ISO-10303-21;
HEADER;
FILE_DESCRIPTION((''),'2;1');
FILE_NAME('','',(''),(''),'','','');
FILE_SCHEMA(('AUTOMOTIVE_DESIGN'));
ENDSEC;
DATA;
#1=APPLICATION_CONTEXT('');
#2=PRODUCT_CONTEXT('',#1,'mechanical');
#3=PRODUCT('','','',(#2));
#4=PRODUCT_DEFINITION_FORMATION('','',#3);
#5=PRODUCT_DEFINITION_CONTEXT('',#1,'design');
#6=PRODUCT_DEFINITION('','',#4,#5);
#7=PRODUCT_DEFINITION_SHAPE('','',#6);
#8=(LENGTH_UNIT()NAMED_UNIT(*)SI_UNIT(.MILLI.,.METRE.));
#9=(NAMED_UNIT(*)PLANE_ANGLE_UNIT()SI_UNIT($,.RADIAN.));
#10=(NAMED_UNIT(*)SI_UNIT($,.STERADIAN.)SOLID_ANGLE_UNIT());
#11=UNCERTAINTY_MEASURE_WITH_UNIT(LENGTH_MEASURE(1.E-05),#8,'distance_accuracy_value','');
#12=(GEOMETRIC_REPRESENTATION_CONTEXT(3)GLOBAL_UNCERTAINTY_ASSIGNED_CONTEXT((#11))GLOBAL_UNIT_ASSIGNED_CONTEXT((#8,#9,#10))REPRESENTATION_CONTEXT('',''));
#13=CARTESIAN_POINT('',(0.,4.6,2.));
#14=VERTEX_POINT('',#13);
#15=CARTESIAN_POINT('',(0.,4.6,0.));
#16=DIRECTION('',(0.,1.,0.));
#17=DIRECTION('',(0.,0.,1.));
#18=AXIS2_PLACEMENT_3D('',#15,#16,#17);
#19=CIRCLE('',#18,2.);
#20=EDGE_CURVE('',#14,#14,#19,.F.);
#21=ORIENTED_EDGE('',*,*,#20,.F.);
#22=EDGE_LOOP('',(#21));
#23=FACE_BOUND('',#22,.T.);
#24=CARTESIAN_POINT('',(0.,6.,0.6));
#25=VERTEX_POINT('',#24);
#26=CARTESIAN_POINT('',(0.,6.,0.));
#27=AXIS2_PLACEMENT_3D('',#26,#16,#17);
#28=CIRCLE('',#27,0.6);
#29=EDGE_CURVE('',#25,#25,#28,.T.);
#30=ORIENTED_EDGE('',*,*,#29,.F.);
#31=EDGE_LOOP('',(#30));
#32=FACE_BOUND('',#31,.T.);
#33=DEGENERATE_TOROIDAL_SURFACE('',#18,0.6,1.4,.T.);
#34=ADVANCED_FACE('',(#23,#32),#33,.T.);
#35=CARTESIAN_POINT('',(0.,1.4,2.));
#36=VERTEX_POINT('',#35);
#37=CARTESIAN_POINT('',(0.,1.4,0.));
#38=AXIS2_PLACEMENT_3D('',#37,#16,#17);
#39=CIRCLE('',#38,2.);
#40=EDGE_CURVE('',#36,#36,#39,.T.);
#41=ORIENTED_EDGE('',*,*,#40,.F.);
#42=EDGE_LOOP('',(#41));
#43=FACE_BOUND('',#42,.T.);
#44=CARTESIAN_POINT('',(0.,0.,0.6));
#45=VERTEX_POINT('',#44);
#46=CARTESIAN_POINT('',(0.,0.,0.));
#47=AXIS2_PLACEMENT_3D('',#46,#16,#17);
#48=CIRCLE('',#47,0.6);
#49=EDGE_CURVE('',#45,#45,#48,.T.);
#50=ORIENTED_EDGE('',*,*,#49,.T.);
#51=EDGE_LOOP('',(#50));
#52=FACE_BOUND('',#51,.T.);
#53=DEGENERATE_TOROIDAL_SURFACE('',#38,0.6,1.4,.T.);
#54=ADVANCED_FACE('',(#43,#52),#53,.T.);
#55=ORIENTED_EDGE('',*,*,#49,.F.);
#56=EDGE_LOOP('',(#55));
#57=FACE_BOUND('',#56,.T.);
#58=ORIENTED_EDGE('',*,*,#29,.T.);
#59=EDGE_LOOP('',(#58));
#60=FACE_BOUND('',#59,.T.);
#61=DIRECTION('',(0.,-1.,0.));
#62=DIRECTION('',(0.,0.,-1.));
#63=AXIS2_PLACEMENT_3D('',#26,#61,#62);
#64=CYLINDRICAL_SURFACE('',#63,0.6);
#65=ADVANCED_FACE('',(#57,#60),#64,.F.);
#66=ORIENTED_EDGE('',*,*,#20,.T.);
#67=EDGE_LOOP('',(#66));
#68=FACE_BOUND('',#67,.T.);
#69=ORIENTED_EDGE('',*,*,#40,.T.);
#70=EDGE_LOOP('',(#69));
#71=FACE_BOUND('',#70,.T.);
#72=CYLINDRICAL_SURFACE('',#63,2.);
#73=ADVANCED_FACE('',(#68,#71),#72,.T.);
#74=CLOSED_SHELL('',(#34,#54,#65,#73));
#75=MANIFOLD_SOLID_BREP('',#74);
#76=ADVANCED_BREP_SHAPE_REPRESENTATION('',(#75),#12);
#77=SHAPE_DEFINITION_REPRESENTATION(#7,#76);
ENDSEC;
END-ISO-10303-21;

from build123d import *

# Parameters (mm, degrees)
ESQUISSE2_R        = 2
ESQUISSE2_R_2      = 0.6
BOSS_EXTRU_1_DEPTH = 6
CONG_1_R           = 1.4


with BuildPart() as part:
    # Esquisse2 → Boss.-Extru.1 (new body)
    with BuildSketch(Plane(origin=(0, 0, 0), x_dir=(1, 0, 0), z_dir=(0, 1, 0))):
        with Locations(Location((0, 0, 0), (0, 0, 270))):
            Circle(ESQUISSE2_R)
        with Locations(Location((0, 0, 0), (0, 0, 270))):
            Circle(ESQUISSE2_R_2, mode=Mode.SUBTRACT)
    extrude(amount=BOSS_EXTRU_1_DEPTH)

    # Congé1
    cong_1_edges = [part.edges().sort_by_distance(p)[0] for p in [
        (0, 0, -2),
        (0, 6, -2),
    ]]
    fillet(cong_1_edges, radius=CONG_1_R - 0.0001)  # a hair under: the kernel refuses the full size


solid = part.part
